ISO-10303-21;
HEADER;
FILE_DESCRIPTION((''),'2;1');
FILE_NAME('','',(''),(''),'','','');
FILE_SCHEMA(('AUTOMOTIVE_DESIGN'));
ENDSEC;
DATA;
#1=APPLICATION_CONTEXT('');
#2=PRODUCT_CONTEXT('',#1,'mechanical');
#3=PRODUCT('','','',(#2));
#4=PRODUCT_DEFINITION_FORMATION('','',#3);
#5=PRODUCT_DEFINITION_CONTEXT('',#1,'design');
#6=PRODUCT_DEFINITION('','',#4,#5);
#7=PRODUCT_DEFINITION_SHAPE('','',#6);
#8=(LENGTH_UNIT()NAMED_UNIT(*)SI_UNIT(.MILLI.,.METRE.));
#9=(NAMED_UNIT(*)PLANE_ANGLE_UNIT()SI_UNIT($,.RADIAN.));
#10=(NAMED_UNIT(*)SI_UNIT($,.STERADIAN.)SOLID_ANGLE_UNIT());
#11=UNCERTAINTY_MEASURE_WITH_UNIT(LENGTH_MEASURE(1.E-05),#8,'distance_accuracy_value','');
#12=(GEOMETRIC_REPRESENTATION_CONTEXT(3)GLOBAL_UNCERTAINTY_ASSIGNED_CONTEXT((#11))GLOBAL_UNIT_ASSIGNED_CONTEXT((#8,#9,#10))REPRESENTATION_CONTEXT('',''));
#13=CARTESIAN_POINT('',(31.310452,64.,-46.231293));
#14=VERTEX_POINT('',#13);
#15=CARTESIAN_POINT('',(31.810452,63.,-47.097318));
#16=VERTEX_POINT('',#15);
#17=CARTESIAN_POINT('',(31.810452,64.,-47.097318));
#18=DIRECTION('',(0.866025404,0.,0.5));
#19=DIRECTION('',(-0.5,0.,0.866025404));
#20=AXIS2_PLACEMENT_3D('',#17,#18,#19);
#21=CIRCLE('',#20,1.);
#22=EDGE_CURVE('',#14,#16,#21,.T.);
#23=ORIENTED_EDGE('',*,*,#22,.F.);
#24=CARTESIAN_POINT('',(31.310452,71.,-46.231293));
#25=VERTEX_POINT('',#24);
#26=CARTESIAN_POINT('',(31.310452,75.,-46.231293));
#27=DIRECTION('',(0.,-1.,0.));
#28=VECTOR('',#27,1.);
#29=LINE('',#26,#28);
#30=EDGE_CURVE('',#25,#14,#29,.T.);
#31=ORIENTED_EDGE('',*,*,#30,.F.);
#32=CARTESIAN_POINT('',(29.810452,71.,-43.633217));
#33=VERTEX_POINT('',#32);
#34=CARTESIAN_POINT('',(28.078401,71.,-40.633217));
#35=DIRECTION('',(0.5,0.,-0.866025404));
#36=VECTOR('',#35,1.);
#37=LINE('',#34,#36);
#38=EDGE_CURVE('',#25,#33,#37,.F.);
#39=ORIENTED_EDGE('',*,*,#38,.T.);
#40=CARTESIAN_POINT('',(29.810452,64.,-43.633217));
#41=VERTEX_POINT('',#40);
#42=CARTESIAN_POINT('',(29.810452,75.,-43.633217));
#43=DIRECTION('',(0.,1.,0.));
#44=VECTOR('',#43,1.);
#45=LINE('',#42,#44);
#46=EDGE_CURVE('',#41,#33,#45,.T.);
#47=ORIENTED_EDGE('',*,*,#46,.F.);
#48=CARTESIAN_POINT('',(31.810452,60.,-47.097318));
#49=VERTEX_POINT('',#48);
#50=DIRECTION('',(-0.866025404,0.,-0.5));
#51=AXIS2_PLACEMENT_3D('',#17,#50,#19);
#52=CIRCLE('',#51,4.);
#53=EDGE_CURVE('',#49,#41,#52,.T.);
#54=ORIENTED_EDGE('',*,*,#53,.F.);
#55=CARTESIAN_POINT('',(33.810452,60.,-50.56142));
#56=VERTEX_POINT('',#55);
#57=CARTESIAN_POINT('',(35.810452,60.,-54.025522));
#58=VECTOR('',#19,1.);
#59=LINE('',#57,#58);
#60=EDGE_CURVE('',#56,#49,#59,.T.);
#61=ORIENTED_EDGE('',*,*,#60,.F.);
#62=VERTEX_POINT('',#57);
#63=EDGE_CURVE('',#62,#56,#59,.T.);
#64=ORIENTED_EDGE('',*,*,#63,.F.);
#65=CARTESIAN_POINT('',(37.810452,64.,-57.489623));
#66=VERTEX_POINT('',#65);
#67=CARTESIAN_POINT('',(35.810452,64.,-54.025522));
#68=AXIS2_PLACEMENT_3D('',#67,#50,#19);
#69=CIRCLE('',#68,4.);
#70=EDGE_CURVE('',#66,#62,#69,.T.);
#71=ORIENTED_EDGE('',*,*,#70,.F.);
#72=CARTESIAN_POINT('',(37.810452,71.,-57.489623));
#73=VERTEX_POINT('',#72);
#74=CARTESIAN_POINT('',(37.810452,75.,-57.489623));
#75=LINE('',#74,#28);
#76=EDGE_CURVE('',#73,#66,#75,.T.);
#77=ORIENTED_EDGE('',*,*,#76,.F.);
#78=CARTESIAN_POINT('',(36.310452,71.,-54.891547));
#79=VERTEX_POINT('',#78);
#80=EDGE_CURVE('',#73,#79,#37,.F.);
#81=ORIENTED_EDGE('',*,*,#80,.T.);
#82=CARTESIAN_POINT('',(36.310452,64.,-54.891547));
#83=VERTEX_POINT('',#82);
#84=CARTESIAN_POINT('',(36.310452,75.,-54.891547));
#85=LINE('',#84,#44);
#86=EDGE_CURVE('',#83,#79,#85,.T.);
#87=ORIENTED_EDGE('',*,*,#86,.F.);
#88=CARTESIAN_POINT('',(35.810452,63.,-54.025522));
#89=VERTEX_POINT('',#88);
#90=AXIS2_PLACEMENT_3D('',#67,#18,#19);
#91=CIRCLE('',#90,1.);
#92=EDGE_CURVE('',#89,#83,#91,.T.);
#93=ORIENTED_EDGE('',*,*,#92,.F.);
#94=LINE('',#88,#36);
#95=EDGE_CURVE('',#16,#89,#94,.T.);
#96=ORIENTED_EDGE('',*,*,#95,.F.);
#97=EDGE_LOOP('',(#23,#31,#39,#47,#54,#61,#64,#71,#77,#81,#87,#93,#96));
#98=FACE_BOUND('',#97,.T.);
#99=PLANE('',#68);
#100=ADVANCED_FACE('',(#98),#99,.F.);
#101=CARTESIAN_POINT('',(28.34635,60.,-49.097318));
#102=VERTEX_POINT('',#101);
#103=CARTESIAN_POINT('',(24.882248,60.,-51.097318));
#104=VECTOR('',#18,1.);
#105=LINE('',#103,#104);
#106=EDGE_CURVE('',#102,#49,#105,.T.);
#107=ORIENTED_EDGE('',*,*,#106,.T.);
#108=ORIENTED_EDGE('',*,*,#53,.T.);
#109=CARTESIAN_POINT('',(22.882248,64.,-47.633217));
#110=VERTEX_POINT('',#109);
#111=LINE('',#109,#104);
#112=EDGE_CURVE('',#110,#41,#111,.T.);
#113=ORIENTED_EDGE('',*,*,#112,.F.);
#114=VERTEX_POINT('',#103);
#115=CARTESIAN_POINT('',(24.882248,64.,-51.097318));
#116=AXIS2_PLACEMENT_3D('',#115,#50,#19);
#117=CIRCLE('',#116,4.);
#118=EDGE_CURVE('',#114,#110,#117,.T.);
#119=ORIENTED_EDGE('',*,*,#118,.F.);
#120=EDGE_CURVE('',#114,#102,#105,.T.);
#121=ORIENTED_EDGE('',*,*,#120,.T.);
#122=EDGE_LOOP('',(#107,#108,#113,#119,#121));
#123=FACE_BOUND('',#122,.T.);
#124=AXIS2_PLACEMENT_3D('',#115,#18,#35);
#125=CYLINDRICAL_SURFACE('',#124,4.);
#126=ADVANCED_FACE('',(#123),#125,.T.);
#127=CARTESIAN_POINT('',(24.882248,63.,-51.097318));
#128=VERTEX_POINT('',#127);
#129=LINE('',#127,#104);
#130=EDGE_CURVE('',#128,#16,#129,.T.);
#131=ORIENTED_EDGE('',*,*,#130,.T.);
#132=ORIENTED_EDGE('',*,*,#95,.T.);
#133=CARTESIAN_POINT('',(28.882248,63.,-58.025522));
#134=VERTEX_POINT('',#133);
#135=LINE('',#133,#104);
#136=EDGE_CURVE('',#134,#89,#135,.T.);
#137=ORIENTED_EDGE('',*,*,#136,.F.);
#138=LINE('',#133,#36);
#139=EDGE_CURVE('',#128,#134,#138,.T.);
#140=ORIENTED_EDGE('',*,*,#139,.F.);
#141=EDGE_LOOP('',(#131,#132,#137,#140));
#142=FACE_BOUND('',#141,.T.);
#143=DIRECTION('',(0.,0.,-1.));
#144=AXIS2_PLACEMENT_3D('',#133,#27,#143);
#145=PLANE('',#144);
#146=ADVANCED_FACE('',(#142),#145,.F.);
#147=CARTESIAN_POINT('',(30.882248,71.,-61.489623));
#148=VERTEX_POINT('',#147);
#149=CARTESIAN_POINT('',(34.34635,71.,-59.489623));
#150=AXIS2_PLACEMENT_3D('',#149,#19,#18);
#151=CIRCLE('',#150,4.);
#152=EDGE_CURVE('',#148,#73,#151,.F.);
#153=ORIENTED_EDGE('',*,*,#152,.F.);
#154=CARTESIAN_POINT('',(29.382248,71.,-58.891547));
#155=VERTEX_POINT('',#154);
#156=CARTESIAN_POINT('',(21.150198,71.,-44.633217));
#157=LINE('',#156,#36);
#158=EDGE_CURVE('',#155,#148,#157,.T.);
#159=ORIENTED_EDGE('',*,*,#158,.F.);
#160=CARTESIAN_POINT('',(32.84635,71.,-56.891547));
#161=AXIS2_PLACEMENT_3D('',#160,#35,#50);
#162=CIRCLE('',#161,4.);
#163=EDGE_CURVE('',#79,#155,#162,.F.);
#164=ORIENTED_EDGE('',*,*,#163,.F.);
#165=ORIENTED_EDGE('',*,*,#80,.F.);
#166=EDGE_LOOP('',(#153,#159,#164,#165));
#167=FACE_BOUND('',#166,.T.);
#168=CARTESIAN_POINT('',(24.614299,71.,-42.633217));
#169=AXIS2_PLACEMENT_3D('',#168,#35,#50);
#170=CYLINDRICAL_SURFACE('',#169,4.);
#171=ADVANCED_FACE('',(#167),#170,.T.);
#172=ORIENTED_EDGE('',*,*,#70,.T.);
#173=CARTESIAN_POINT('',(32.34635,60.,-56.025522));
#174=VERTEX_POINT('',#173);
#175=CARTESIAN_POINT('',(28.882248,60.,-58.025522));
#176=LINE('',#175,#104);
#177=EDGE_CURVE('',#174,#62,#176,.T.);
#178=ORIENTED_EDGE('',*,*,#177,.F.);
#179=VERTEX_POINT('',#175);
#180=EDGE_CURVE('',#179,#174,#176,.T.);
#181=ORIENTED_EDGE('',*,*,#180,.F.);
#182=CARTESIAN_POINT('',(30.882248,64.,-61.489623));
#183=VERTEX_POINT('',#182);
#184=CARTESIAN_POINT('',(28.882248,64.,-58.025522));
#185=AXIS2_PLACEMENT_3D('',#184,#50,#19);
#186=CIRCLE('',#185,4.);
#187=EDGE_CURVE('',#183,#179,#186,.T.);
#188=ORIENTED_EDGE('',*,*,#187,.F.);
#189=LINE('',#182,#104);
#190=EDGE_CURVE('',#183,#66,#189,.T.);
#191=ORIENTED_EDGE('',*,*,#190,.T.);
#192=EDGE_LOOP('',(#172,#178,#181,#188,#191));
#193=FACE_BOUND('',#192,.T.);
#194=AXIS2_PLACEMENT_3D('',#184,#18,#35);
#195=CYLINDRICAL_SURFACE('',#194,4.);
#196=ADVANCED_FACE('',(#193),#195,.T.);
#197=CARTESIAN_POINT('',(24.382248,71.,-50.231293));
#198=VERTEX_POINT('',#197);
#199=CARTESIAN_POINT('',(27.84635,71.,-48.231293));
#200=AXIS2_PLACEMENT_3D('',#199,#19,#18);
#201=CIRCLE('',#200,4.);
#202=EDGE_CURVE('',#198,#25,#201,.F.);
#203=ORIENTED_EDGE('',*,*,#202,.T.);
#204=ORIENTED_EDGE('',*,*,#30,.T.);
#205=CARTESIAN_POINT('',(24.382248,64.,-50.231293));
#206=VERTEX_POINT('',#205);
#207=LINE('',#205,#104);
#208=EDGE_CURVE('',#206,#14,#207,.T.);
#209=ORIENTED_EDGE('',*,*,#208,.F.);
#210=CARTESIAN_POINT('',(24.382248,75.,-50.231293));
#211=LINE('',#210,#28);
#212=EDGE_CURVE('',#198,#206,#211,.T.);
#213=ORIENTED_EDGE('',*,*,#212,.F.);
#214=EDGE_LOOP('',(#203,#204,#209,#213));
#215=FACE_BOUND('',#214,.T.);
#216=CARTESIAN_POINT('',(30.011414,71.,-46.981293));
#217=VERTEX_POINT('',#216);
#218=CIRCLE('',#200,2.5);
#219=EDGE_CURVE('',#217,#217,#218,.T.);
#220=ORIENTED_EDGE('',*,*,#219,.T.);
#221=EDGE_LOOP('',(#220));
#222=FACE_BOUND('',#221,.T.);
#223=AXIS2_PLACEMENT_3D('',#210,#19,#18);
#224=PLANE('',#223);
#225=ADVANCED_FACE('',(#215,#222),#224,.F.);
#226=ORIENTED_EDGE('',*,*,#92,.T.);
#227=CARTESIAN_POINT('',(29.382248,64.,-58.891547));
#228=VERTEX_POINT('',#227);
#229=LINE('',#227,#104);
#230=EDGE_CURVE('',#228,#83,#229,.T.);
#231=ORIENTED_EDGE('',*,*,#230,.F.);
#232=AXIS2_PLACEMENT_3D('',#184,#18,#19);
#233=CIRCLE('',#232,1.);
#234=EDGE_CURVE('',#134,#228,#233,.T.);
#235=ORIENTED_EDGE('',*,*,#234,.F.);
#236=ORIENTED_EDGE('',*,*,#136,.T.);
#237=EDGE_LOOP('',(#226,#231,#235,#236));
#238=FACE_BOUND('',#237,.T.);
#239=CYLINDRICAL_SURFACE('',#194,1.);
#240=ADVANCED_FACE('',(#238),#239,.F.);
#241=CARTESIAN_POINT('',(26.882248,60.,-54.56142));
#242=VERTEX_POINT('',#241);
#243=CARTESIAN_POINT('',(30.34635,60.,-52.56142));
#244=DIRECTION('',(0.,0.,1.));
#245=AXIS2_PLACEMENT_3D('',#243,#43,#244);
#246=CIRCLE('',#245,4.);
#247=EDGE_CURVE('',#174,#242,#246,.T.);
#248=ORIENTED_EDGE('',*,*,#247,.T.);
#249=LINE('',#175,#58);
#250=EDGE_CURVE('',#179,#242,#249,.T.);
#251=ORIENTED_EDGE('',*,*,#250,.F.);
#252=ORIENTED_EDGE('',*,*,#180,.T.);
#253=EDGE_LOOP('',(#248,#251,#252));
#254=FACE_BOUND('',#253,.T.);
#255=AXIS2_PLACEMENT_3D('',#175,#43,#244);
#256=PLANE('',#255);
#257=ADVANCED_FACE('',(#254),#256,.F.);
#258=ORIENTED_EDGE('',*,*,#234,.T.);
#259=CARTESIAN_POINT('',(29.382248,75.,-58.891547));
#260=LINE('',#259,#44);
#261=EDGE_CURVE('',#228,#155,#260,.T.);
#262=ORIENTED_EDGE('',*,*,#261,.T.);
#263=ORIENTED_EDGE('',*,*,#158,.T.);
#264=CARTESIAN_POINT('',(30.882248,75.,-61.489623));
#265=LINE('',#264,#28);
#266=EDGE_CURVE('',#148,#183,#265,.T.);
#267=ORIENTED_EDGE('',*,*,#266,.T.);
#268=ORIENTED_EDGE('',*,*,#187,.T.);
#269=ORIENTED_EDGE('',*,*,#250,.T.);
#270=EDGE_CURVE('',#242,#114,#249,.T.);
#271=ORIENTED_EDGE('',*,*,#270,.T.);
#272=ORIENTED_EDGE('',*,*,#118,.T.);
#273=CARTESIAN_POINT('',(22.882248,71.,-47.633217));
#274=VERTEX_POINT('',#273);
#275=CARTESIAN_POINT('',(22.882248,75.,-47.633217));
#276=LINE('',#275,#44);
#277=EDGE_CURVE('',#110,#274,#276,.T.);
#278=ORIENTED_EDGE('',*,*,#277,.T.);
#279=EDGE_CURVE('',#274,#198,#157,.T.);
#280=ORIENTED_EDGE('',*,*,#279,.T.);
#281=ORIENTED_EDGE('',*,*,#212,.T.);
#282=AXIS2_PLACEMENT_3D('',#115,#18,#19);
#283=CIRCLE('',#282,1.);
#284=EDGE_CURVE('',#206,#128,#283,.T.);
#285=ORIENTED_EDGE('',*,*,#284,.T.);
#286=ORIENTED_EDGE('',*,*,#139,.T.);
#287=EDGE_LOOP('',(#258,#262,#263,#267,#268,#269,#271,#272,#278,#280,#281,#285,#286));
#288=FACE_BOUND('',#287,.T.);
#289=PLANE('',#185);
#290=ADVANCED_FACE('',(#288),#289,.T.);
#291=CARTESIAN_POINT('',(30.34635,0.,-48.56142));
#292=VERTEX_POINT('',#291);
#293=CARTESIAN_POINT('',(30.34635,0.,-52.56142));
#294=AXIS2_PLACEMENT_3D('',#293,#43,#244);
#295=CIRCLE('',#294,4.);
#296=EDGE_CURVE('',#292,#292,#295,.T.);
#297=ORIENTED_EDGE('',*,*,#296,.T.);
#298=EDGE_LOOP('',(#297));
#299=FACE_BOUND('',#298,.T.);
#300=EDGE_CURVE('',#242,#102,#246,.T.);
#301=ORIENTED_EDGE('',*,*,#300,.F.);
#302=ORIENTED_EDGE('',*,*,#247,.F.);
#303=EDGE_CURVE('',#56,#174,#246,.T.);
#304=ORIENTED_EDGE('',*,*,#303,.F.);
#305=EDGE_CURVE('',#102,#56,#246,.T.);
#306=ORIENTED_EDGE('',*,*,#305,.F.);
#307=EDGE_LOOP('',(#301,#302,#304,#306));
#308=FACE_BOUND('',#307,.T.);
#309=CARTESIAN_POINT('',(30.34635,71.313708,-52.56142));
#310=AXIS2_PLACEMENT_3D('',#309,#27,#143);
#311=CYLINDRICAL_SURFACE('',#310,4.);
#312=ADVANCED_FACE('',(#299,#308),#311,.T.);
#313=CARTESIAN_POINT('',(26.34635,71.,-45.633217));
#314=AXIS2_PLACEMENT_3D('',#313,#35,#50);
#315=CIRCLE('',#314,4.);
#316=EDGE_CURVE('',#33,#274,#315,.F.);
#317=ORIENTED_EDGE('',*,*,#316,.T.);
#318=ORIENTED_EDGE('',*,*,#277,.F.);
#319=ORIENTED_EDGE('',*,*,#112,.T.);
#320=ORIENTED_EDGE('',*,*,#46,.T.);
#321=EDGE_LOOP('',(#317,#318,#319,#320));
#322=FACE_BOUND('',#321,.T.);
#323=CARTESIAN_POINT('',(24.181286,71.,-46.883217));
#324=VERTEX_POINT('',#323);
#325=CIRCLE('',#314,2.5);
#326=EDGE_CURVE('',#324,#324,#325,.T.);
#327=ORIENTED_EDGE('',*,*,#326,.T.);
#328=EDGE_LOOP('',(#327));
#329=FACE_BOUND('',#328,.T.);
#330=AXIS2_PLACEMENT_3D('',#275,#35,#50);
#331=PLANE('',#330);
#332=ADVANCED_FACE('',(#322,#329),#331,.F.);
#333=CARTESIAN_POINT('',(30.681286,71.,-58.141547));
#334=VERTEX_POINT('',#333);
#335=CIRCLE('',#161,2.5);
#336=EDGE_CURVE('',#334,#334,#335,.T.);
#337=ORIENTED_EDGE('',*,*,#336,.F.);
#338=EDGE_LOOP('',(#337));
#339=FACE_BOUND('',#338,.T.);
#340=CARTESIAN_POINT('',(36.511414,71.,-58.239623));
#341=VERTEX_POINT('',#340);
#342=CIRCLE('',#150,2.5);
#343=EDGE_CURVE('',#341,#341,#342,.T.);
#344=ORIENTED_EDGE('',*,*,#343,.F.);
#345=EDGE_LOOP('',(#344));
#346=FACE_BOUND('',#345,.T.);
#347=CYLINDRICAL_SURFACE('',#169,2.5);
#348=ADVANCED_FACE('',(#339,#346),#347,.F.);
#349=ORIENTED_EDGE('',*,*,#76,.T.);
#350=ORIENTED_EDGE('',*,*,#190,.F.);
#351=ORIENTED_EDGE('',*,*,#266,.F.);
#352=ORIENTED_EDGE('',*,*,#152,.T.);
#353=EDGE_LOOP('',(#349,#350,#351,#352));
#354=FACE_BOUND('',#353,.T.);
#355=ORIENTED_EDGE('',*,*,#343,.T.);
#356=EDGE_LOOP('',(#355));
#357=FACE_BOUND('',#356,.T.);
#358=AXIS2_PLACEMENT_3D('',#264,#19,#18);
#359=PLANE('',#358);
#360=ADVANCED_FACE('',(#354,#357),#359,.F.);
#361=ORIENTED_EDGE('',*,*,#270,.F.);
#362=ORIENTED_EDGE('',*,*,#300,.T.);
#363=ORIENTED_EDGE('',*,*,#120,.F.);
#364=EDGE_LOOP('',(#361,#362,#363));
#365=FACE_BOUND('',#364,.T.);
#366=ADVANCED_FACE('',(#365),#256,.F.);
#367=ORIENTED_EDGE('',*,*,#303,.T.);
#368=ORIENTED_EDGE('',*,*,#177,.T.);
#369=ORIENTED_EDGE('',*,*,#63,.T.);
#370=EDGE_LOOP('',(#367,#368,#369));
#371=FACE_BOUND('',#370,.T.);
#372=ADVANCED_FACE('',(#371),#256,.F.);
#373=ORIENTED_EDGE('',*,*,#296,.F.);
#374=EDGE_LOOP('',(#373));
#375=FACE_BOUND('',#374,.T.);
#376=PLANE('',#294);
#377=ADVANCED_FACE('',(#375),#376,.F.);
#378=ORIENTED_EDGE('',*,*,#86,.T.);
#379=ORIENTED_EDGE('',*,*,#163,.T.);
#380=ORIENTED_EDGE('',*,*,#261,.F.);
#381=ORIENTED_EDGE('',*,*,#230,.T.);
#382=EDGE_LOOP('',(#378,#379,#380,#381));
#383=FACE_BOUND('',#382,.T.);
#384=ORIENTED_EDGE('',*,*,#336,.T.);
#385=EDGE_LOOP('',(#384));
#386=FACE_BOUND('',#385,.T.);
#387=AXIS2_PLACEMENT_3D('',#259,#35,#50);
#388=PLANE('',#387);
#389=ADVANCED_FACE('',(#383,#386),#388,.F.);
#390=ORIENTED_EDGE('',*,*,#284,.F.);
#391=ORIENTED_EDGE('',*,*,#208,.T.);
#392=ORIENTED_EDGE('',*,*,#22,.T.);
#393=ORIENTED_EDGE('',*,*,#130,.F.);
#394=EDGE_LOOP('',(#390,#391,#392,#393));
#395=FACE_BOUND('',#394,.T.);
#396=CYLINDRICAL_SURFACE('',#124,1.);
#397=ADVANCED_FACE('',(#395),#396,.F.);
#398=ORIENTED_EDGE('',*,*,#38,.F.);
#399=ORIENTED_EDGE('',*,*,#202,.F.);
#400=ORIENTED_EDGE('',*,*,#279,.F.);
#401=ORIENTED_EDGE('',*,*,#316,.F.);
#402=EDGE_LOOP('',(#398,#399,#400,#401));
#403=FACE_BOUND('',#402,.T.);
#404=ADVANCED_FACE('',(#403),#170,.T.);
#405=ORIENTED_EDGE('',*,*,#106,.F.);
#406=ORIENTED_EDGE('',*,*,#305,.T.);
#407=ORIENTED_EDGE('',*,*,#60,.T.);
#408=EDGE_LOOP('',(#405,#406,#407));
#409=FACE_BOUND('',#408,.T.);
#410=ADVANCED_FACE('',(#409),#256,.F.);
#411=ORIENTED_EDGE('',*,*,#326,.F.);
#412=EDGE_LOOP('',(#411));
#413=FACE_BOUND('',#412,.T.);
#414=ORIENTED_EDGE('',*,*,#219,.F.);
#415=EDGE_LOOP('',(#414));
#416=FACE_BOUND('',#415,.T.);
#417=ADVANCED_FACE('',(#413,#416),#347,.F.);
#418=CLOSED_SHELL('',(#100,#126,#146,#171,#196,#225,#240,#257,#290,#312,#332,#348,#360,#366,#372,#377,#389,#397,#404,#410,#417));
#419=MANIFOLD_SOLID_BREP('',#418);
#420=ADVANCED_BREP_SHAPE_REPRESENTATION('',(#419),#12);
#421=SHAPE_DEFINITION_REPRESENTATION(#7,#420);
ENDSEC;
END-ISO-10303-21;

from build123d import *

# Parameters (mm, degrees)
BASE_LINK_OUTLINE_R     = 5
BASE_LINK_OUTLINE_R_2   = 4
BASE_LINK_DEPTH         = 60
SKETCH3_R               = 4
BOSS_EXTRUDE1_DEPTH     = 60
BOSS_EXTRUDE2_DEPTH     = 4
CUT_EXTRUDE1_DEPTH      = 78.510329968
CUT_EXTRUDE1_DEPTH_BACK = 78.510329968
SKETCH5_R               = 2.5


# Read off the part's stored shape, not the designer's step: base_link
with BuildPart() as part:
    # base_link outline → base_link (new body)
    with BuildSketch(Plane(origin=(0, 0, 0), x_dir=(1, 0, 0), z_dir=(0, 1, 0))):
        with Locations((30.34635, 52.561420024)):
            Circle(BASE_LINK_OUTLINE_R)
        with Locations((30.34635, 52.561420024)):
            Circle(BASE_LINK_OUTLINE_R_2, mode=Mode.SUBTRACT)
    extrude(amount=BASE_LINK_DEPTH)


with BuildPart() as body_2:
    # Sketch3 → Boss-Extrude1 (new body)
    with BuildSketch(Plane(origin=(0, 0, 0), x_dir=(1, 0, 0), z_dir=(0, 1, 0))):
        with Locations(Location((30.34635, 52.561420024, 0), (0, 0, 270))):
            Circle(SKETCH3_R)
    extrude(amount=BOSS_EXTRUDE1_DEPTH)

    # Sketch4 → Boss-Extrude2 (add, symmetric)
    with BuildSketch(Plane(origin=(0, 0, 0), x_dir=(-0.49999999999999994, 0, 0.8660254037844387), z_dir=(-0.8660254037844386, 0, -0.4999999999999999))):
        with BuildLine():
            Line((-68.6927, 75), (-65.6927, 75))
            Line((-65.6927, 75), (-65.6927, 64))
            ThreePointArc((-65.6927, 64), (-65.399806781, 63.292893219), (-64.6927, 63))
            Line((-64.6927, 63), (-56.6927, 63))
            ThreePointArc((-56.6927, 63), (-55.985593219, 63.292893219), (-55.6927, 64))
            Line((-55.6927, 64), (-55.6927, 75))
            Line((-55.6927, 75), (-52.6927, 75))
            Line((-52.6927, 75), (-52.6927, 64))
            ThreePointArc((-52.6927, 64), (-53.864272875, 61.171572875), (-56.6927, 60))
            Line((-56.6927, 60), (-64.6927, 60))
            ThreePointArc((-64.6927, 60), (-67.521127125, 61.171572875), (-68.6927, 64))
            Line((-68.6927, 64), (-68.6927, 75))
        make_face()
    extrude(amount=BOSS_EXTRUDE2_DEPTH, both=True)

    # Sketch5 → Cut-Extrude1 (cut, two sides: drawn at the far end of the back side and taken through both)
    with BuildSketch(Plane(origin=(34.34635, 0, -59.489623255), x_dir=(-0.8660254037844386, 0, -0.5), z_dir=(0.5000000000000001, 0, -0.8660254037844387)).offset(-CUT_EXTRUDE1_DEPTH_BACK)):
        with Locations((0, 71)):
            Circle(SKETCH5_R)
        with BuildLine():
            Line((-4, 71), (-4, 76))
            Line((-4, 76), (4, 76))
            Line((4, 76), (4, 71))
            ThreePointArc((4, 71), (0, 75), (-4, 71))
        make_face()
    extrude(amount=CUT_EXTRUDE1_DEPTH + CUT_EXTRUDE1_DEPTH_BACK, mode=Mode.SUBTRACT)


solid = body_2.part
